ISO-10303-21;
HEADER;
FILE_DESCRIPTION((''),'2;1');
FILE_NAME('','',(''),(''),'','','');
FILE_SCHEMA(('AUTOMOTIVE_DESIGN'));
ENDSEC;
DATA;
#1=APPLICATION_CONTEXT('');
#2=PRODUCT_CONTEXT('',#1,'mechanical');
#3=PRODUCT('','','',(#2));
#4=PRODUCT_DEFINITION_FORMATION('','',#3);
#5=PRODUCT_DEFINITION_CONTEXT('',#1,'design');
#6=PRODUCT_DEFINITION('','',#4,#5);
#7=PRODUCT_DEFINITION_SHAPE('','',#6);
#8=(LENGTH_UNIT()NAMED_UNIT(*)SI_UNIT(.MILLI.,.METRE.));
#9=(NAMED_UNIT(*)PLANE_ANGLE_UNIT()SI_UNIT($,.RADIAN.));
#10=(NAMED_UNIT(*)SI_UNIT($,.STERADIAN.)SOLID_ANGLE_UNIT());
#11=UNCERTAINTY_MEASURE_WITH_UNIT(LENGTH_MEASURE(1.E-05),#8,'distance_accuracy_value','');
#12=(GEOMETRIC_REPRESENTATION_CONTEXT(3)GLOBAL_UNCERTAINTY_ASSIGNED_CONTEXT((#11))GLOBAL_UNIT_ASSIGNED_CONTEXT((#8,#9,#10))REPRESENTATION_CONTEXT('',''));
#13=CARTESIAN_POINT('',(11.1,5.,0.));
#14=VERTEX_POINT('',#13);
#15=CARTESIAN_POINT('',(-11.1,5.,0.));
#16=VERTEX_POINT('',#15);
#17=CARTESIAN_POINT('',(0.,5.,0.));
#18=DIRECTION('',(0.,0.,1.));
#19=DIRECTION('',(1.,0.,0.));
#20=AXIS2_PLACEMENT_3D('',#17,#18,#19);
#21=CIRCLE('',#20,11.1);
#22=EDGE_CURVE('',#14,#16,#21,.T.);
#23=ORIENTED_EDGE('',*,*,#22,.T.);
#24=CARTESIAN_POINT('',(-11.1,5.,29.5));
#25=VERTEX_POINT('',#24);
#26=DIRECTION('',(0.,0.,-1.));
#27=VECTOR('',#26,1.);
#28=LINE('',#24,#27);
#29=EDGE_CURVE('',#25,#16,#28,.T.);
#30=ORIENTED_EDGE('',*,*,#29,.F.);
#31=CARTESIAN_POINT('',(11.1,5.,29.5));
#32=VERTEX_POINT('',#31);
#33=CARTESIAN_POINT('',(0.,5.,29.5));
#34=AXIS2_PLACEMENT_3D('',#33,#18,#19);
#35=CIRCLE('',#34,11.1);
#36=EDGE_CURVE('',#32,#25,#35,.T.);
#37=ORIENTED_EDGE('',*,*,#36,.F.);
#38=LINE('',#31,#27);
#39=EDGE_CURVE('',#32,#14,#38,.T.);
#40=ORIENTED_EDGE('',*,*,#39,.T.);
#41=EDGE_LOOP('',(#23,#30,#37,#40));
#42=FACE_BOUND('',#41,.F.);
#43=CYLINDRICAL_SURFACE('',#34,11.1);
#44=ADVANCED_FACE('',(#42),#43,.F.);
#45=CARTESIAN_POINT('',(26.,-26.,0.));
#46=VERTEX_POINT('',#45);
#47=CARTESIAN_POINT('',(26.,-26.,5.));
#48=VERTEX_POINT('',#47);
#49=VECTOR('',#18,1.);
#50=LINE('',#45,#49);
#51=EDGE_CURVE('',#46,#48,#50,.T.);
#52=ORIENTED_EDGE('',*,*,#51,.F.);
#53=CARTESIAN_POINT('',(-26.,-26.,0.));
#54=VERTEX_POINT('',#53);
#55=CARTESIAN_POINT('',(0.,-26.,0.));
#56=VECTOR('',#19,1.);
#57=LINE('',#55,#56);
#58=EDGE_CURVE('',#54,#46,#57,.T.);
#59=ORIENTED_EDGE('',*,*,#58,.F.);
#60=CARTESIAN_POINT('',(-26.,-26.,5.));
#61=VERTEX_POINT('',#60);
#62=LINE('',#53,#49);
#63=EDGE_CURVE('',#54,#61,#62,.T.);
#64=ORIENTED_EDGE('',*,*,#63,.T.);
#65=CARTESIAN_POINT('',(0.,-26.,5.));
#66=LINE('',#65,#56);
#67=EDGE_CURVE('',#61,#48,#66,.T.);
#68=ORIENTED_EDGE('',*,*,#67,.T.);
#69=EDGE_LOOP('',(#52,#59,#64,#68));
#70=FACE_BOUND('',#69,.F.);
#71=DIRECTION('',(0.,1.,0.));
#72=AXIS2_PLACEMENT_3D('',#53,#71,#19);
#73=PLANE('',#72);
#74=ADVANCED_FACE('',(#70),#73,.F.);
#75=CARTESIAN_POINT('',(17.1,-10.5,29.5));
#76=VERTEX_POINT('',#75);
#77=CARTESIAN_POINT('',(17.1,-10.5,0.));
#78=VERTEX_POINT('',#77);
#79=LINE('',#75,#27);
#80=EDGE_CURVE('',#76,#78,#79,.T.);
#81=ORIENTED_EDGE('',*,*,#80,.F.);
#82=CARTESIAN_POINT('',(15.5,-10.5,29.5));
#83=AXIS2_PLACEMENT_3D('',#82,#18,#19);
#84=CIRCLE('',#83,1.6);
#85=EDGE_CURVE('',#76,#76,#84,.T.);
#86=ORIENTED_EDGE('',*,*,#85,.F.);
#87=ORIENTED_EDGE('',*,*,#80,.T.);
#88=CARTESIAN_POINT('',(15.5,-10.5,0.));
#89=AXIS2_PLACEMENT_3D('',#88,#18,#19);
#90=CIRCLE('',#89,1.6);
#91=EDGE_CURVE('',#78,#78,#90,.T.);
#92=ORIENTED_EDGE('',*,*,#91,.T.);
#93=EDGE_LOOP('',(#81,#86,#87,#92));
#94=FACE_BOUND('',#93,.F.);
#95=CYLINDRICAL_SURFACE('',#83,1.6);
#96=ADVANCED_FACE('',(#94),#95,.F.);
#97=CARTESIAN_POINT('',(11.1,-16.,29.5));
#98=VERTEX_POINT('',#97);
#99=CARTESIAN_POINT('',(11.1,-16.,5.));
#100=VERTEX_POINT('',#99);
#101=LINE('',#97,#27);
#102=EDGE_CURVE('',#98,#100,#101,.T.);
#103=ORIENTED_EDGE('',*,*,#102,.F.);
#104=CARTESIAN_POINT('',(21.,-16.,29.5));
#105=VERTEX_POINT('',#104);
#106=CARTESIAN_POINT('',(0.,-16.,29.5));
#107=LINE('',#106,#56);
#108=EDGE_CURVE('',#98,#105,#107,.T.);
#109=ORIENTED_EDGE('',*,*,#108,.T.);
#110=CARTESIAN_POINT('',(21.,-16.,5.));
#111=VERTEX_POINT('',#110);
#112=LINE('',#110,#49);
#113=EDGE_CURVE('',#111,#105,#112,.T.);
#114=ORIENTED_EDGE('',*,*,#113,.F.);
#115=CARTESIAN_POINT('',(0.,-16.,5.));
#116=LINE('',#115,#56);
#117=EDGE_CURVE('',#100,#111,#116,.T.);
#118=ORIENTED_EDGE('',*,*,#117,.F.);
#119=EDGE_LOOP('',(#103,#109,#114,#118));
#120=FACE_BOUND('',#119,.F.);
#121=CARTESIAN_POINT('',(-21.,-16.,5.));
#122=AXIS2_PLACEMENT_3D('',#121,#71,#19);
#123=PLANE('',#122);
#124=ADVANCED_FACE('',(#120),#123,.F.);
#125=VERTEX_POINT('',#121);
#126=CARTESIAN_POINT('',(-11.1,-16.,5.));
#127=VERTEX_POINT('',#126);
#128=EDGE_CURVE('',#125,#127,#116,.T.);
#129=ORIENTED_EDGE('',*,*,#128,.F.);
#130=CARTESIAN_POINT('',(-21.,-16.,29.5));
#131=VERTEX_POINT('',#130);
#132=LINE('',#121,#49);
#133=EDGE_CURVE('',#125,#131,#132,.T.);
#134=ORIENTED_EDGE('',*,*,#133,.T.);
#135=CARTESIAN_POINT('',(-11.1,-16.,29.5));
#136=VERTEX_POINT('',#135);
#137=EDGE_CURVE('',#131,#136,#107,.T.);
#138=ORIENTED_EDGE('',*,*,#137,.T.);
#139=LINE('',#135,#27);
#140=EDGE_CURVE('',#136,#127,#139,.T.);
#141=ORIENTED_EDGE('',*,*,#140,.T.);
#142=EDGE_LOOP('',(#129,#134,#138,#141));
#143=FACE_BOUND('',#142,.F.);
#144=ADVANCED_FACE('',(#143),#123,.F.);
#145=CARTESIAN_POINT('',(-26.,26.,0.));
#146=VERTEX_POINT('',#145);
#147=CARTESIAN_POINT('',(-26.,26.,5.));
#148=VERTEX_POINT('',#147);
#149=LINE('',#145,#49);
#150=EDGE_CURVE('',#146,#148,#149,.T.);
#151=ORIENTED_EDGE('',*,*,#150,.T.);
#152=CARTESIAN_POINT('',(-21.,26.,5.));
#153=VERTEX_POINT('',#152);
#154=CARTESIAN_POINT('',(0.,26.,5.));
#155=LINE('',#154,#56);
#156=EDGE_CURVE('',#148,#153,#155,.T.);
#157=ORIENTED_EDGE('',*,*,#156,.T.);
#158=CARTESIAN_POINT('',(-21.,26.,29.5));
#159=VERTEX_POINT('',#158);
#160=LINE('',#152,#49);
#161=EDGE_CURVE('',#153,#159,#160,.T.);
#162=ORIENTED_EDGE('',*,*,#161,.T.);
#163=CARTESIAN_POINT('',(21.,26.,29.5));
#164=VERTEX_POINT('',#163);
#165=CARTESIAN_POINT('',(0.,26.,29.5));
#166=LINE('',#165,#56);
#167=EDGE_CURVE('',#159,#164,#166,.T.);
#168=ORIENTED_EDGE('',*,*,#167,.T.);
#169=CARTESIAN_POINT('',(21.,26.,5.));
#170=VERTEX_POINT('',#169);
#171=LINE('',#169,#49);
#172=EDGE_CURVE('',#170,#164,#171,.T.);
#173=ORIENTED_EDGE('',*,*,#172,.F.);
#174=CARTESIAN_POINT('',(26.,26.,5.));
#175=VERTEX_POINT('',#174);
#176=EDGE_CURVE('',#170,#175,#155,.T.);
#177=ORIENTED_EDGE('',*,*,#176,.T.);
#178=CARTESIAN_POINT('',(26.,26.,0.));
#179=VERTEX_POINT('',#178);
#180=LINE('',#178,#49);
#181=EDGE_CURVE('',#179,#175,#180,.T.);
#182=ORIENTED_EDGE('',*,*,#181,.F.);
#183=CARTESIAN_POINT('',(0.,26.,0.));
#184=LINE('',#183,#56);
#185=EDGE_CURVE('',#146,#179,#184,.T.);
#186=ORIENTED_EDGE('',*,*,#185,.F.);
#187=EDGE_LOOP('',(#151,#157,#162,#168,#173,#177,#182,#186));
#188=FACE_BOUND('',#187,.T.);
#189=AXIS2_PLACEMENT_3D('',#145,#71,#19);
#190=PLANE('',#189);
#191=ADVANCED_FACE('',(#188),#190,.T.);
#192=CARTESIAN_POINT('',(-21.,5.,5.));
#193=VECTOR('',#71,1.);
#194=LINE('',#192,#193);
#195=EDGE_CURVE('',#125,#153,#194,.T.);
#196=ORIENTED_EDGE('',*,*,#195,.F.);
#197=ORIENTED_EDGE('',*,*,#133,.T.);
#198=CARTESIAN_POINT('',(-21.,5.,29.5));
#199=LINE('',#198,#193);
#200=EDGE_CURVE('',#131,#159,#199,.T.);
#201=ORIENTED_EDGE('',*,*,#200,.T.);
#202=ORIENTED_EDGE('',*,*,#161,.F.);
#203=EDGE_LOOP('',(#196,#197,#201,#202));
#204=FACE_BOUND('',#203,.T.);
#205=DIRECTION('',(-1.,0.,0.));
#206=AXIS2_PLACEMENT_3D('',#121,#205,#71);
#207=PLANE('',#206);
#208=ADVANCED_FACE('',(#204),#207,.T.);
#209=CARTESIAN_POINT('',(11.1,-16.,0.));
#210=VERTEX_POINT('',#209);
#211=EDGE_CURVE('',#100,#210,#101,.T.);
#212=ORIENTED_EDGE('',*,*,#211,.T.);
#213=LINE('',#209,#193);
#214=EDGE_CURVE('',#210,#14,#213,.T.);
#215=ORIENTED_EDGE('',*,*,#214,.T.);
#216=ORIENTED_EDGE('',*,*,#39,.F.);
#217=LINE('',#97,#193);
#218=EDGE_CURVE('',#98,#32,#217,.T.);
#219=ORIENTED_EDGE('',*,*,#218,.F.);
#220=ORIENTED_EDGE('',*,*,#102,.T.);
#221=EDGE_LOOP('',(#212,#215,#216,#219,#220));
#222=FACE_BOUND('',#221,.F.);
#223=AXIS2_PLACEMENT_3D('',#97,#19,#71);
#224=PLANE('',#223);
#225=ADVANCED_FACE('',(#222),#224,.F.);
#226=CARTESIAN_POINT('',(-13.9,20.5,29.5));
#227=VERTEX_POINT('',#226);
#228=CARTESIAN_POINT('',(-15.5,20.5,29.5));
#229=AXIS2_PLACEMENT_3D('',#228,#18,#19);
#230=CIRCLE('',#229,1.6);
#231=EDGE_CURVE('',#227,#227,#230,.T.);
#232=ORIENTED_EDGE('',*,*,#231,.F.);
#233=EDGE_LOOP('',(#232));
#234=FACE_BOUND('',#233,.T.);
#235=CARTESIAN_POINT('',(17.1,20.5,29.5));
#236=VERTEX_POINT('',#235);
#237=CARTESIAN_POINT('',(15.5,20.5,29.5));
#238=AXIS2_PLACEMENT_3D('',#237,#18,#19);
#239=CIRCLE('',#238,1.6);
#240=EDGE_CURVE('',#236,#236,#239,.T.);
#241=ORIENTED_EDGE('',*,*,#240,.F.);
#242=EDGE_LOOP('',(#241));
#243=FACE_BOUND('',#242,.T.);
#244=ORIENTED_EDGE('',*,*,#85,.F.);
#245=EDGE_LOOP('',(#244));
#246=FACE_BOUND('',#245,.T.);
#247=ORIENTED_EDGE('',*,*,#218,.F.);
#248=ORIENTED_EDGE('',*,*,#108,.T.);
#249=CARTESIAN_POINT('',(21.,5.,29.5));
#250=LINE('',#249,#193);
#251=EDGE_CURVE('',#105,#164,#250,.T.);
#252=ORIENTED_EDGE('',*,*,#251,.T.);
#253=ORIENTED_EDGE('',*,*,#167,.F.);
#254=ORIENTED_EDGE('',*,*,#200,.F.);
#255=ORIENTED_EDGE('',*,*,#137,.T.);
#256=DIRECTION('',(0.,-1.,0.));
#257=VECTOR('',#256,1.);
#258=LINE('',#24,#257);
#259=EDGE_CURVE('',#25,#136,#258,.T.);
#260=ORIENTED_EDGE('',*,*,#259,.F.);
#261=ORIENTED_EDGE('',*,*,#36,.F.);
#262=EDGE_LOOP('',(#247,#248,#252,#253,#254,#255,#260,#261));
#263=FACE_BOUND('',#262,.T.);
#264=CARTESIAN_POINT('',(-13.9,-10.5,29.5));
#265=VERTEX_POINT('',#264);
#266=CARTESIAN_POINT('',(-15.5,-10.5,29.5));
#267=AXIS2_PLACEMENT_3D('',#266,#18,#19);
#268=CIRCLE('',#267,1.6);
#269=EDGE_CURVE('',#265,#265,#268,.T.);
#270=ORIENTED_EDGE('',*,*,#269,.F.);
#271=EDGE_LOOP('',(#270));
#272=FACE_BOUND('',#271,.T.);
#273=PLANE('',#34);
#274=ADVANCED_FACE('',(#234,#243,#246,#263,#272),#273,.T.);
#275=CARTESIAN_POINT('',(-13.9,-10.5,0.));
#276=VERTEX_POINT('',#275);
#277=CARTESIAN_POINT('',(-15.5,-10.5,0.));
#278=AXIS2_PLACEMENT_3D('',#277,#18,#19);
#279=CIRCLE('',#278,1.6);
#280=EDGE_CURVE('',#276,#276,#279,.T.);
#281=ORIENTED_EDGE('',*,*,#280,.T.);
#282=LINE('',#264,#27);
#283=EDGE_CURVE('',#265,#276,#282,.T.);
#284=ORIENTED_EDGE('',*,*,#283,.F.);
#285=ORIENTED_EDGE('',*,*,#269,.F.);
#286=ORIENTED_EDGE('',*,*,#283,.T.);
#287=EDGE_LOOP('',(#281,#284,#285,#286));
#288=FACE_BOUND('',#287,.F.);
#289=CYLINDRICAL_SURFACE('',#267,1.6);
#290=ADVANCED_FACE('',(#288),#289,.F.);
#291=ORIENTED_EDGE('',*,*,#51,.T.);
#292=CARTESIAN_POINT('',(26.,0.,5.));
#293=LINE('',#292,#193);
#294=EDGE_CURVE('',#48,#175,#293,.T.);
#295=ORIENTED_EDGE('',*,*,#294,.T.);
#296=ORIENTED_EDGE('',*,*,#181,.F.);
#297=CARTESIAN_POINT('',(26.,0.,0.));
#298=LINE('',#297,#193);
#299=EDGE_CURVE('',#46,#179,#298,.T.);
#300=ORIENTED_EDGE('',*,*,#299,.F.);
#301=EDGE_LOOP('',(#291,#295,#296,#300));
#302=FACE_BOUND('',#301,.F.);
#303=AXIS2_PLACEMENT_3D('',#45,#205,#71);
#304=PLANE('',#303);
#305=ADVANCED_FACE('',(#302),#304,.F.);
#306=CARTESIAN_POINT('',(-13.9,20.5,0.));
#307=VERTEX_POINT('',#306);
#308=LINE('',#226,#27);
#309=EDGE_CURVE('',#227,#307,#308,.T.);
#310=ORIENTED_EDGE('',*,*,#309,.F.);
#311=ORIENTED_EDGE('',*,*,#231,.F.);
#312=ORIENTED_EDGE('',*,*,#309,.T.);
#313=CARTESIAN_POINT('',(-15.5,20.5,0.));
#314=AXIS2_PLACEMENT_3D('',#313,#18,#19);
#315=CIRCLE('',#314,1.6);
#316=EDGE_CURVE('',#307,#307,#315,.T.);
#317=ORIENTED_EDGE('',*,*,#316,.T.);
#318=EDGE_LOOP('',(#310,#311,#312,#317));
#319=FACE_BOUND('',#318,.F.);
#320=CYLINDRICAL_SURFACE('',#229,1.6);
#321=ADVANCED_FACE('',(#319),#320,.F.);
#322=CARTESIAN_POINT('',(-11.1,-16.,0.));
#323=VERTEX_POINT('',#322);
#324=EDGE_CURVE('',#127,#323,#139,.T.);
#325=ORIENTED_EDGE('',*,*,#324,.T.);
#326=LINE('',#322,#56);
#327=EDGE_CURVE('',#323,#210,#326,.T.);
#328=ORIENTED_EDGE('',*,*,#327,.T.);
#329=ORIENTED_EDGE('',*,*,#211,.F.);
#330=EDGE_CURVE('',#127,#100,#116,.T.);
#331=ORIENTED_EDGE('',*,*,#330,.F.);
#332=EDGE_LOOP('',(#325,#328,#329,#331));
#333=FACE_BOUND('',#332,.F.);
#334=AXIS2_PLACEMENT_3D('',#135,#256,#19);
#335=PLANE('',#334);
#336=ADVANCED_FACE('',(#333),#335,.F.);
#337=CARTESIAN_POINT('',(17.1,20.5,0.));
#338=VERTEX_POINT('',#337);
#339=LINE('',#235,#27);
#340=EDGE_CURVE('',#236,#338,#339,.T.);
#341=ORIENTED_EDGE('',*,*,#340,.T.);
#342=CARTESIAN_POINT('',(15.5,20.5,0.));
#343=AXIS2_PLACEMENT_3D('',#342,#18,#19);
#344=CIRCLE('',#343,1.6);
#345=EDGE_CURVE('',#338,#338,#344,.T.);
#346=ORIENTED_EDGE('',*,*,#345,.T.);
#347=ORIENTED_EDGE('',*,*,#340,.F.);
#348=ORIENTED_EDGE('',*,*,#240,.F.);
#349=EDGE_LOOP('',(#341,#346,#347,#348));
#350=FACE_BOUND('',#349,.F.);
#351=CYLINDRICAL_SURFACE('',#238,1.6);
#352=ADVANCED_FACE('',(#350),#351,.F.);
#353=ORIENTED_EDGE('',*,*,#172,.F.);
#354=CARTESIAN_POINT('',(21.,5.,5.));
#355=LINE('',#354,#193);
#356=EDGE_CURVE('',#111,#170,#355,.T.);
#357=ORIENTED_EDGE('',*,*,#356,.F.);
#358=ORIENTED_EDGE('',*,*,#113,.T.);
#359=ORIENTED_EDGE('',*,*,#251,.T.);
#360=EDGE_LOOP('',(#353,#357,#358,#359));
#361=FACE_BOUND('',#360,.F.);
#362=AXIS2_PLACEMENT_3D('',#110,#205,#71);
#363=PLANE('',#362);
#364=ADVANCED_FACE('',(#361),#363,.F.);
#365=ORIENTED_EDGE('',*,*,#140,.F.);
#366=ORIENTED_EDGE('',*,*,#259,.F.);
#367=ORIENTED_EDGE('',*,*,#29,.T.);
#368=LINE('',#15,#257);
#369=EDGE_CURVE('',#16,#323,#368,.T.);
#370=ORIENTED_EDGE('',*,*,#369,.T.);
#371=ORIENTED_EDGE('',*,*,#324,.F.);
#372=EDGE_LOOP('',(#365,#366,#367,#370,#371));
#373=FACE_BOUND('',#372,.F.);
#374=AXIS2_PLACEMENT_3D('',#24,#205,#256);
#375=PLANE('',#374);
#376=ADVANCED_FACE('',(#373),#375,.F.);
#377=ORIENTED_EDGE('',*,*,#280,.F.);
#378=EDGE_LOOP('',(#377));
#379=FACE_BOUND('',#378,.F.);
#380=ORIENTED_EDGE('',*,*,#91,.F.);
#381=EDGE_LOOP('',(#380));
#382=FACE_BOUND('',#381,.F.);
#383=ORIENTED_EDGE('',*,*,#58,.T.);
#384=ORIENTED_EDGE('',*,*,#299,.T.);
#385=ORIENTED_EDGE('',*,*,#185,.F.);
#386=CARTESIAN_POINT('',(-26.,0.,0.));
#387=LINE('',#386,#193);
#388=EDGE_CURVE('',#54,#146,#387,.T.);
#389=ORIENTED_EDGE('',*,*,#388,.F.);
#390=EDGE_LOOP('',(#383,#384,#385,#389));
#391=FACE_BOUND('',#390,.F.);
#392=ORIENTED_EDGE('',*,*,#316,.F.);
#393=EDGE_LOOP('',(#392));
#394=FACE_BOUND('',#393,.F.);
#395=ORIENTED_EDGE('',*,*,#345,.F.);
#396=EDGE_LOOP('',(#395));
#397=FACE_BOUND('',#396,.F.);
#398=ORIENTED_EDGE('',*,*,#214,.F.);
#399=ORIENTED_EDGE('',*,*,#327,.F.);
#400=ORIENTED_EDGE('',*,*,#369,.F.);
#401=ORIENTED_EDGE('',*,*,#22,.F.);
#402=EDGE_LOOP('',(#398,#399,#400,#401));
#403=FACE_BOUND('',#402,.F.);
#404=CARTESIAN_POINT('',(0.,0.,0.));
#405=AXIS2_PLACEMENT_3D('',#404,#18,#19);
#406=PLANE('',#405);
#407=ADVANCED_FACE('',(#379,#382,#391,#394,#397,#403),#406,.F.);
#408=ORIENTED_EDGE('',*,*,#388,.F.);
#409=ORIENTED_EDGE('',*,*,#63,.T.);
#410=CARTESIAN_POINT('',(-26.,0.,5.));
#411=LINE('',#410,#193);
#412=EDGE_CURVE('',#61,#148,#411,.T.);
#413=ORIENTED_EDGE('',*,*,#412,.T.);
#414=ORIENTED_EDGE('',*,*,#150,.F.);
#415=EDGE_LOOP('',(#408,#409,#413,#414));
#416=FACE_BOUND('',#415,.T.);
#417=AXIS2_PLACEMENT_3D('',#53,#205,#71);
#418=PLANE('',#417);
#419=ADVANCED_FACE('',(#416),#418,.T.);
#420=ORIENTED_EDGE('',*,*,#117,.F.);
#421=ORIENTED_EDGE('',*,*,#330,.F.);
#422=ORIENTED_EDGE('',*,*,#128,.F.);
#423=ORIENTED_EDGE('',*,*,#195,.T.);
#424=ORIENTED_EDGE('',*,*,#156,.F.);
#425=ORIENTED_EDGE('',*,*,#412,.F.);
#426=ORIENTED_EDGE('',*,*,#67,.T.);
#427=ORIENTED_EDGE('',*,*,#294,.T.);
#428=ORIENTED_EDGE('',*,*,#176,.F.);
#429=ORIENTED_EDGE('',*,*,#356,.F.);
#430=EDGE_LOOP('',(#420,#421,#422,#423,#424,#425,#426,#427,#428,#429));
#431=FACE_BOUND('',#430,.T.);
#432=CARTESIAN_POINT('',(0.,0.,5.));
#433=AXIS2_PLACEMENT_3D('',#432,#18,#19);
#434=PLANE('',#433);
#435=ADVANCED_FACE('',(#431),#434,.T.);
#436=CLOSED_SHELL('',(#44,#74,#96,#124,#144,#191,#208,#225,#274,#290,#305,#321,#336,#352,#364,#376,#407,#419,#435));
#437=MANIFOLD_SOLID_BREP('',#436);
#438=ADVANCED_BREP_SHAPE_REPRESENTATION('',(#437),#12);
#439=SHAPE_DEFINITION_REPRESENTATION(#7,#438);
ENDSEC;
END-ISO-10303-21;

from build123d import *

# Parameters (mm, degrees)
F0_W     = 52
F0_H     = 52
F1_DEPTH = 5
F2_W     = 42
F2_H     = 42
F3_DEPTH = 24.5
F4_R     = 1.6
F5_DEPTH = 29.5


# Not quite as in the source:
# - a feature names something its author has since deleted; it is built from what else it names


with BuildPart() as f1:
    # F0 (on Top) → F1 (new body)
    with BuildSketch(Plane.XY):
        Rectangle(F0_W, F0_H)
    extrude(amount=F1_DEPTH)

    # F2 (on face) → F3 (join)
    with BuildSketch(Plane.XY.offset(5)):
        with Locations((0, 5)):
            Rectangle(F2_W, F2_H)
    extrude(amount=F3_DEPTH)

    # F4 (on face) → F5 (cut, through all)
    with BuildSketch(Plane.XY.offset(29.5)):
        with Locations((-15.5, 20.5)):
            Circle(F4_R)
        with Locations((15.5, 20.5)):
            Circle(F4_R)
        with Locations((-15.5, -10.5)):
            Circle(F4_R)
        with Locations((15.5, -10.5)):
            Circle(F4_R)
        with BuildLine():
            ThreePointArc((-11.1, 5), (0, -6.1), (11.1, 5))
            ThreePointArc((11.1, 5), (0, 16.1), (-11.1, 5))
        make_face()
        with BuildLine():
            Line((11.1, -16), (11.1, 5))
            ThreePointArc((11.1, 5), (0, -6.1), (-11.1, 5))
            Line((-11.1, 5), (-11.1, -16))
            Line((-11.1, -16), (11.1, -16))
        make_face()
    extrude(amount=-F5_DEPTH, mode=Mode.SUBTRACT)


solid = f1.part
